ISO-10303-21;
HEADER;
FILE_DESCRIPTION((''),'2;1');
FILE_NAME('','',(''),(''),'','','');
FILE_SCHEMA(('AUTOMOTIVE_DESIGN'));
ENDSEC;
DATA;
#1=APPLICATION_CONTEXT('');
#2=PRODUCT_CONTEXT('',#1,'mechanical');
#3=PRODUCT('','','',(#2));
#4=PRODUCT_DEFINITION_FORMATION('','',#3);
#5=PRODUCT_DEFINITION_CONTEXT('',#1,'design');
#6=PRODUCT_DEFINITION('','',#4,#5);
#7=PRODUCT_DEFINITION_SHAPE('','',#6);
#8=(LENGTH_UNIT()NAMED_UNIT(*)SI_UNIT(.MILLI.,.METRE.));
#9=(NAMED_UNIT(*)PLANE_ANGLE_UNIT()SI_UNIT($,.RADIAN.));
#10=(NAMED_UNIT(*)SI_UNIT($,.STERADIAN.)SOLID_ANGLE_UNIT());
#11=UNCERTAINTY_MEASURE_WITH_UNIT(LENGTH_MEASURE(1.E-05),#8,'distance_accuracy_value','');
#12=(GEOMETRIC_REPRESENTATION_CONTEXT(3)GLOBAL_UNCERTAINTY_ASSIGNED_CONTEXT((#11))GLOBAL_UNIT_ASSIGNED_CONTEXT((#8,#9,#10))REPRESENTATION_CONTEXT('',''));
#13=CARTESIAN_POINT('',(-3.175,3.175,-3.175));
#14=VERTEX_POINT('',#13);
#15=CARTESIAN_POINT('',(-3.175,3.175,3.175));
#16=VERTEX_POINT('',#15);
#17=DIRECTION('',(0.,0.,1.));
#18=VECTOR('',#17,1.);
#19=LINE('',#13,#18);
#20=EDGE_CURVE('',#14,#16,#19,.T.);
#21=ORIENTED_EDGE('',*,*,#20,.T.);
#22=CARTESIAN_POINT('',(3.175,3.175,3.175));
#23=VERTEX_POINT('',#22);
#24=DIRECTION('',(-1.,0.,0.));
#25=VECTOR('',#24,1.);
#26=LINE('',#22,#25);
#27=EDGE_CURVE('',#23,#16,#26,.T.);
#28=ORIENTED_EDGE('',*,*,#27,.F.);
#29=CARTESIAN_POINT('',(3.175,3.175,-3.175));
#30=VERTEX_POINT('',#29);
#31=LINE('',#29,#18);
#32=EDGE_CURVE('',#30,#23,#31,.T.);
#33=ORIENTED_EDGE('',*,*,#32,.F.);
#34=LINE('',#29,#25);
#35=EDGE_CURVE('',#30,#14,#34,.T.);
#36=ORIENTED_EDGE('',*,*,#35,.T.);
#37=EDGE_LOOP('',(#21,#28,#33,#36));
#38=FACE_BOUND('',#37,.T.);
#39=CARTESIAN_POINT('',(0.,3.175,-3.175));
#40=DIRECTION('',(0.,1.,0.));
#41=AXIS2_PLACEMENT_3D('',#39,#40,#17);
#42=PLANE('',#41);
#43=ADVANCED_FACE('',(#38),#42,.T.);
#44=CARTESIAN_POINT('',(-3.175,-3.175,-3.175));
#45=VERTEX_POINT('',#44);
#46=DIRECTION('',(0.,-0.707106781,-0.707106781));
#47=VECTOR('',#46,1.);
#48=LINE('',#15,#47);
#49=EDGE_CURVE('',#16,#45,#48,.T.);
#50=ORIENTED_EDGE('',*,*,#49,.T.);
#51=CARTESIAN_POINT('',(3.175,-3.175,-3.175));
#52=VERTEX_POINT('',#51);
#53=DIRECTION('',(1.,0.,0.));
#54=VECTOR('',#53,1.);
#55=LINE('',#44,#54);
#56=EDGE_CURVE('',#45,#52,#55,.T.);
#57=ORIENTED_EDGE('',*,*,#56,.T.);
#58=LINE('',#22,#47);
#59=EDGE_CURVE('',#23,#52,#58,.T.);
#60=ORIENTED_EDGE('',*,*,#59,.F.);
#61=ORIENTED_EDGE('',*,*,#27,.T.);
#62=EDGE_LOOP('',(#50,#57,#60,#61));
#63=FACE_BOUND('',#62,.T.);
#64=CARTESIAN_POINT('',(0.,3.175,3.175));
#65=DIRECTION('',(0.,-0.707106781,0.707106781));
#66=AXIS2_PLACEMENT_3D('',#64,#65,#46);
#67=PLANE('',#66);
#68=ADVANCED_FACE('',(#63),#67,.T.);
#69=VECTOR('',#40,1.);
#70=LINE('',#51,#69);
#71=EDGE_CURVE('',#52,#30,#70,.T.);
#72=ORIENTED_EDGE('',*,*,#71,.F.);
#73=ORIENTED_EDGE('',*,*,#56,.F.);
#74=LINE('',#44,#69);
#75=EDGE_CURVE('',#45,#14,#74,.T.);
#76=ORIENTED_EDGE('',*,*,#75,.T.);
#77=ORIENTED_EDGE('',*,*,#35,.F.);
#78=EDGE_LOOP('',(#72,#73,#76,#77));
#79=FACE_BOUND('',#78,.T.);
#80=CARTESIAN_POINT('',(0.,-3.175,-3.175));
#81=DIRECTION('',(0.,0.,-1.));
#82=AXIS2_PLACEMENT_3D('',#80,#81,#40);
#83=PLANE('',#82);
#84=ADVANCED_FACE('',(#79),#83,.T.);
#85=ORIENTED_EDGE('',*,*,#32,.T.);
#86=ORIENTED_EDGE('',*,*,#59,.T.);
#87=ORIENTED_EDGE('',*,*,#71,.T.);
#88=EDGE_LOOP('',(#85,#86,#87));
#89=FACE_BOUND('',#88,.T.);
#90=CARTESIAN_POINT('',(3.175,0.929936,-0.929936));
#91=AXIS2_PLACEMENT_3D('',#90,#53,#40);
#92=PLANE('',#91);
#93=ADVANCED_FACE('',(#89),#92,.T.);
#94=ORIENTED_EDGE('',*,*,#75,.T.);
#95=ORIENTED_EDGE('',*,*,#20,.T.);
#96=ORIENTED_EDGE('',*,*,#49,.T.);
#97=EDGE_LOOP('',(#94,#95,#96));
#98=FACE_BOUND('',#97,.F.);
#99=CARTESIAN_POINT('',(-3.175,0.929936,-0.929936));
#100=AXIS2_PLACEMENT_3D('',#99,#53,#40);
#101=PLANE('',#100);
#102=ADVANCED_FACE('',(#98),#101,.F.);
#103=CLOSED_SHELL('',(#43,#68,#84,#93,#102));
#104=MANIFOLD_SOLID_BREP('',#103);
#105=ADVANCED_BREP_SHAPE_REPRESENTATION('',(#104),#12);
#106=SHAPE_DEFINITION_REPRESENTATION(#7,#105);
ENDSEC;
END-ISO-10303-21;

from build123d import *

# Parameters (mm, degrees)
F1_DEPTH = 3.175


# Not quite as in the source:
# - a feature names something its author has since deleted; it is built from what else it names


with BuildPart() as f1:
    # F0 (on Right) → F1 (new body, symmetric)
    with BuildSketch(Plane.YZ):
        Polygon((3.175, 3.175), (-3.175, -3.175), (3.175, -3.175), align=None)
    extrude(amount=F1_DEPTH, both=True)


solid = f1.part
